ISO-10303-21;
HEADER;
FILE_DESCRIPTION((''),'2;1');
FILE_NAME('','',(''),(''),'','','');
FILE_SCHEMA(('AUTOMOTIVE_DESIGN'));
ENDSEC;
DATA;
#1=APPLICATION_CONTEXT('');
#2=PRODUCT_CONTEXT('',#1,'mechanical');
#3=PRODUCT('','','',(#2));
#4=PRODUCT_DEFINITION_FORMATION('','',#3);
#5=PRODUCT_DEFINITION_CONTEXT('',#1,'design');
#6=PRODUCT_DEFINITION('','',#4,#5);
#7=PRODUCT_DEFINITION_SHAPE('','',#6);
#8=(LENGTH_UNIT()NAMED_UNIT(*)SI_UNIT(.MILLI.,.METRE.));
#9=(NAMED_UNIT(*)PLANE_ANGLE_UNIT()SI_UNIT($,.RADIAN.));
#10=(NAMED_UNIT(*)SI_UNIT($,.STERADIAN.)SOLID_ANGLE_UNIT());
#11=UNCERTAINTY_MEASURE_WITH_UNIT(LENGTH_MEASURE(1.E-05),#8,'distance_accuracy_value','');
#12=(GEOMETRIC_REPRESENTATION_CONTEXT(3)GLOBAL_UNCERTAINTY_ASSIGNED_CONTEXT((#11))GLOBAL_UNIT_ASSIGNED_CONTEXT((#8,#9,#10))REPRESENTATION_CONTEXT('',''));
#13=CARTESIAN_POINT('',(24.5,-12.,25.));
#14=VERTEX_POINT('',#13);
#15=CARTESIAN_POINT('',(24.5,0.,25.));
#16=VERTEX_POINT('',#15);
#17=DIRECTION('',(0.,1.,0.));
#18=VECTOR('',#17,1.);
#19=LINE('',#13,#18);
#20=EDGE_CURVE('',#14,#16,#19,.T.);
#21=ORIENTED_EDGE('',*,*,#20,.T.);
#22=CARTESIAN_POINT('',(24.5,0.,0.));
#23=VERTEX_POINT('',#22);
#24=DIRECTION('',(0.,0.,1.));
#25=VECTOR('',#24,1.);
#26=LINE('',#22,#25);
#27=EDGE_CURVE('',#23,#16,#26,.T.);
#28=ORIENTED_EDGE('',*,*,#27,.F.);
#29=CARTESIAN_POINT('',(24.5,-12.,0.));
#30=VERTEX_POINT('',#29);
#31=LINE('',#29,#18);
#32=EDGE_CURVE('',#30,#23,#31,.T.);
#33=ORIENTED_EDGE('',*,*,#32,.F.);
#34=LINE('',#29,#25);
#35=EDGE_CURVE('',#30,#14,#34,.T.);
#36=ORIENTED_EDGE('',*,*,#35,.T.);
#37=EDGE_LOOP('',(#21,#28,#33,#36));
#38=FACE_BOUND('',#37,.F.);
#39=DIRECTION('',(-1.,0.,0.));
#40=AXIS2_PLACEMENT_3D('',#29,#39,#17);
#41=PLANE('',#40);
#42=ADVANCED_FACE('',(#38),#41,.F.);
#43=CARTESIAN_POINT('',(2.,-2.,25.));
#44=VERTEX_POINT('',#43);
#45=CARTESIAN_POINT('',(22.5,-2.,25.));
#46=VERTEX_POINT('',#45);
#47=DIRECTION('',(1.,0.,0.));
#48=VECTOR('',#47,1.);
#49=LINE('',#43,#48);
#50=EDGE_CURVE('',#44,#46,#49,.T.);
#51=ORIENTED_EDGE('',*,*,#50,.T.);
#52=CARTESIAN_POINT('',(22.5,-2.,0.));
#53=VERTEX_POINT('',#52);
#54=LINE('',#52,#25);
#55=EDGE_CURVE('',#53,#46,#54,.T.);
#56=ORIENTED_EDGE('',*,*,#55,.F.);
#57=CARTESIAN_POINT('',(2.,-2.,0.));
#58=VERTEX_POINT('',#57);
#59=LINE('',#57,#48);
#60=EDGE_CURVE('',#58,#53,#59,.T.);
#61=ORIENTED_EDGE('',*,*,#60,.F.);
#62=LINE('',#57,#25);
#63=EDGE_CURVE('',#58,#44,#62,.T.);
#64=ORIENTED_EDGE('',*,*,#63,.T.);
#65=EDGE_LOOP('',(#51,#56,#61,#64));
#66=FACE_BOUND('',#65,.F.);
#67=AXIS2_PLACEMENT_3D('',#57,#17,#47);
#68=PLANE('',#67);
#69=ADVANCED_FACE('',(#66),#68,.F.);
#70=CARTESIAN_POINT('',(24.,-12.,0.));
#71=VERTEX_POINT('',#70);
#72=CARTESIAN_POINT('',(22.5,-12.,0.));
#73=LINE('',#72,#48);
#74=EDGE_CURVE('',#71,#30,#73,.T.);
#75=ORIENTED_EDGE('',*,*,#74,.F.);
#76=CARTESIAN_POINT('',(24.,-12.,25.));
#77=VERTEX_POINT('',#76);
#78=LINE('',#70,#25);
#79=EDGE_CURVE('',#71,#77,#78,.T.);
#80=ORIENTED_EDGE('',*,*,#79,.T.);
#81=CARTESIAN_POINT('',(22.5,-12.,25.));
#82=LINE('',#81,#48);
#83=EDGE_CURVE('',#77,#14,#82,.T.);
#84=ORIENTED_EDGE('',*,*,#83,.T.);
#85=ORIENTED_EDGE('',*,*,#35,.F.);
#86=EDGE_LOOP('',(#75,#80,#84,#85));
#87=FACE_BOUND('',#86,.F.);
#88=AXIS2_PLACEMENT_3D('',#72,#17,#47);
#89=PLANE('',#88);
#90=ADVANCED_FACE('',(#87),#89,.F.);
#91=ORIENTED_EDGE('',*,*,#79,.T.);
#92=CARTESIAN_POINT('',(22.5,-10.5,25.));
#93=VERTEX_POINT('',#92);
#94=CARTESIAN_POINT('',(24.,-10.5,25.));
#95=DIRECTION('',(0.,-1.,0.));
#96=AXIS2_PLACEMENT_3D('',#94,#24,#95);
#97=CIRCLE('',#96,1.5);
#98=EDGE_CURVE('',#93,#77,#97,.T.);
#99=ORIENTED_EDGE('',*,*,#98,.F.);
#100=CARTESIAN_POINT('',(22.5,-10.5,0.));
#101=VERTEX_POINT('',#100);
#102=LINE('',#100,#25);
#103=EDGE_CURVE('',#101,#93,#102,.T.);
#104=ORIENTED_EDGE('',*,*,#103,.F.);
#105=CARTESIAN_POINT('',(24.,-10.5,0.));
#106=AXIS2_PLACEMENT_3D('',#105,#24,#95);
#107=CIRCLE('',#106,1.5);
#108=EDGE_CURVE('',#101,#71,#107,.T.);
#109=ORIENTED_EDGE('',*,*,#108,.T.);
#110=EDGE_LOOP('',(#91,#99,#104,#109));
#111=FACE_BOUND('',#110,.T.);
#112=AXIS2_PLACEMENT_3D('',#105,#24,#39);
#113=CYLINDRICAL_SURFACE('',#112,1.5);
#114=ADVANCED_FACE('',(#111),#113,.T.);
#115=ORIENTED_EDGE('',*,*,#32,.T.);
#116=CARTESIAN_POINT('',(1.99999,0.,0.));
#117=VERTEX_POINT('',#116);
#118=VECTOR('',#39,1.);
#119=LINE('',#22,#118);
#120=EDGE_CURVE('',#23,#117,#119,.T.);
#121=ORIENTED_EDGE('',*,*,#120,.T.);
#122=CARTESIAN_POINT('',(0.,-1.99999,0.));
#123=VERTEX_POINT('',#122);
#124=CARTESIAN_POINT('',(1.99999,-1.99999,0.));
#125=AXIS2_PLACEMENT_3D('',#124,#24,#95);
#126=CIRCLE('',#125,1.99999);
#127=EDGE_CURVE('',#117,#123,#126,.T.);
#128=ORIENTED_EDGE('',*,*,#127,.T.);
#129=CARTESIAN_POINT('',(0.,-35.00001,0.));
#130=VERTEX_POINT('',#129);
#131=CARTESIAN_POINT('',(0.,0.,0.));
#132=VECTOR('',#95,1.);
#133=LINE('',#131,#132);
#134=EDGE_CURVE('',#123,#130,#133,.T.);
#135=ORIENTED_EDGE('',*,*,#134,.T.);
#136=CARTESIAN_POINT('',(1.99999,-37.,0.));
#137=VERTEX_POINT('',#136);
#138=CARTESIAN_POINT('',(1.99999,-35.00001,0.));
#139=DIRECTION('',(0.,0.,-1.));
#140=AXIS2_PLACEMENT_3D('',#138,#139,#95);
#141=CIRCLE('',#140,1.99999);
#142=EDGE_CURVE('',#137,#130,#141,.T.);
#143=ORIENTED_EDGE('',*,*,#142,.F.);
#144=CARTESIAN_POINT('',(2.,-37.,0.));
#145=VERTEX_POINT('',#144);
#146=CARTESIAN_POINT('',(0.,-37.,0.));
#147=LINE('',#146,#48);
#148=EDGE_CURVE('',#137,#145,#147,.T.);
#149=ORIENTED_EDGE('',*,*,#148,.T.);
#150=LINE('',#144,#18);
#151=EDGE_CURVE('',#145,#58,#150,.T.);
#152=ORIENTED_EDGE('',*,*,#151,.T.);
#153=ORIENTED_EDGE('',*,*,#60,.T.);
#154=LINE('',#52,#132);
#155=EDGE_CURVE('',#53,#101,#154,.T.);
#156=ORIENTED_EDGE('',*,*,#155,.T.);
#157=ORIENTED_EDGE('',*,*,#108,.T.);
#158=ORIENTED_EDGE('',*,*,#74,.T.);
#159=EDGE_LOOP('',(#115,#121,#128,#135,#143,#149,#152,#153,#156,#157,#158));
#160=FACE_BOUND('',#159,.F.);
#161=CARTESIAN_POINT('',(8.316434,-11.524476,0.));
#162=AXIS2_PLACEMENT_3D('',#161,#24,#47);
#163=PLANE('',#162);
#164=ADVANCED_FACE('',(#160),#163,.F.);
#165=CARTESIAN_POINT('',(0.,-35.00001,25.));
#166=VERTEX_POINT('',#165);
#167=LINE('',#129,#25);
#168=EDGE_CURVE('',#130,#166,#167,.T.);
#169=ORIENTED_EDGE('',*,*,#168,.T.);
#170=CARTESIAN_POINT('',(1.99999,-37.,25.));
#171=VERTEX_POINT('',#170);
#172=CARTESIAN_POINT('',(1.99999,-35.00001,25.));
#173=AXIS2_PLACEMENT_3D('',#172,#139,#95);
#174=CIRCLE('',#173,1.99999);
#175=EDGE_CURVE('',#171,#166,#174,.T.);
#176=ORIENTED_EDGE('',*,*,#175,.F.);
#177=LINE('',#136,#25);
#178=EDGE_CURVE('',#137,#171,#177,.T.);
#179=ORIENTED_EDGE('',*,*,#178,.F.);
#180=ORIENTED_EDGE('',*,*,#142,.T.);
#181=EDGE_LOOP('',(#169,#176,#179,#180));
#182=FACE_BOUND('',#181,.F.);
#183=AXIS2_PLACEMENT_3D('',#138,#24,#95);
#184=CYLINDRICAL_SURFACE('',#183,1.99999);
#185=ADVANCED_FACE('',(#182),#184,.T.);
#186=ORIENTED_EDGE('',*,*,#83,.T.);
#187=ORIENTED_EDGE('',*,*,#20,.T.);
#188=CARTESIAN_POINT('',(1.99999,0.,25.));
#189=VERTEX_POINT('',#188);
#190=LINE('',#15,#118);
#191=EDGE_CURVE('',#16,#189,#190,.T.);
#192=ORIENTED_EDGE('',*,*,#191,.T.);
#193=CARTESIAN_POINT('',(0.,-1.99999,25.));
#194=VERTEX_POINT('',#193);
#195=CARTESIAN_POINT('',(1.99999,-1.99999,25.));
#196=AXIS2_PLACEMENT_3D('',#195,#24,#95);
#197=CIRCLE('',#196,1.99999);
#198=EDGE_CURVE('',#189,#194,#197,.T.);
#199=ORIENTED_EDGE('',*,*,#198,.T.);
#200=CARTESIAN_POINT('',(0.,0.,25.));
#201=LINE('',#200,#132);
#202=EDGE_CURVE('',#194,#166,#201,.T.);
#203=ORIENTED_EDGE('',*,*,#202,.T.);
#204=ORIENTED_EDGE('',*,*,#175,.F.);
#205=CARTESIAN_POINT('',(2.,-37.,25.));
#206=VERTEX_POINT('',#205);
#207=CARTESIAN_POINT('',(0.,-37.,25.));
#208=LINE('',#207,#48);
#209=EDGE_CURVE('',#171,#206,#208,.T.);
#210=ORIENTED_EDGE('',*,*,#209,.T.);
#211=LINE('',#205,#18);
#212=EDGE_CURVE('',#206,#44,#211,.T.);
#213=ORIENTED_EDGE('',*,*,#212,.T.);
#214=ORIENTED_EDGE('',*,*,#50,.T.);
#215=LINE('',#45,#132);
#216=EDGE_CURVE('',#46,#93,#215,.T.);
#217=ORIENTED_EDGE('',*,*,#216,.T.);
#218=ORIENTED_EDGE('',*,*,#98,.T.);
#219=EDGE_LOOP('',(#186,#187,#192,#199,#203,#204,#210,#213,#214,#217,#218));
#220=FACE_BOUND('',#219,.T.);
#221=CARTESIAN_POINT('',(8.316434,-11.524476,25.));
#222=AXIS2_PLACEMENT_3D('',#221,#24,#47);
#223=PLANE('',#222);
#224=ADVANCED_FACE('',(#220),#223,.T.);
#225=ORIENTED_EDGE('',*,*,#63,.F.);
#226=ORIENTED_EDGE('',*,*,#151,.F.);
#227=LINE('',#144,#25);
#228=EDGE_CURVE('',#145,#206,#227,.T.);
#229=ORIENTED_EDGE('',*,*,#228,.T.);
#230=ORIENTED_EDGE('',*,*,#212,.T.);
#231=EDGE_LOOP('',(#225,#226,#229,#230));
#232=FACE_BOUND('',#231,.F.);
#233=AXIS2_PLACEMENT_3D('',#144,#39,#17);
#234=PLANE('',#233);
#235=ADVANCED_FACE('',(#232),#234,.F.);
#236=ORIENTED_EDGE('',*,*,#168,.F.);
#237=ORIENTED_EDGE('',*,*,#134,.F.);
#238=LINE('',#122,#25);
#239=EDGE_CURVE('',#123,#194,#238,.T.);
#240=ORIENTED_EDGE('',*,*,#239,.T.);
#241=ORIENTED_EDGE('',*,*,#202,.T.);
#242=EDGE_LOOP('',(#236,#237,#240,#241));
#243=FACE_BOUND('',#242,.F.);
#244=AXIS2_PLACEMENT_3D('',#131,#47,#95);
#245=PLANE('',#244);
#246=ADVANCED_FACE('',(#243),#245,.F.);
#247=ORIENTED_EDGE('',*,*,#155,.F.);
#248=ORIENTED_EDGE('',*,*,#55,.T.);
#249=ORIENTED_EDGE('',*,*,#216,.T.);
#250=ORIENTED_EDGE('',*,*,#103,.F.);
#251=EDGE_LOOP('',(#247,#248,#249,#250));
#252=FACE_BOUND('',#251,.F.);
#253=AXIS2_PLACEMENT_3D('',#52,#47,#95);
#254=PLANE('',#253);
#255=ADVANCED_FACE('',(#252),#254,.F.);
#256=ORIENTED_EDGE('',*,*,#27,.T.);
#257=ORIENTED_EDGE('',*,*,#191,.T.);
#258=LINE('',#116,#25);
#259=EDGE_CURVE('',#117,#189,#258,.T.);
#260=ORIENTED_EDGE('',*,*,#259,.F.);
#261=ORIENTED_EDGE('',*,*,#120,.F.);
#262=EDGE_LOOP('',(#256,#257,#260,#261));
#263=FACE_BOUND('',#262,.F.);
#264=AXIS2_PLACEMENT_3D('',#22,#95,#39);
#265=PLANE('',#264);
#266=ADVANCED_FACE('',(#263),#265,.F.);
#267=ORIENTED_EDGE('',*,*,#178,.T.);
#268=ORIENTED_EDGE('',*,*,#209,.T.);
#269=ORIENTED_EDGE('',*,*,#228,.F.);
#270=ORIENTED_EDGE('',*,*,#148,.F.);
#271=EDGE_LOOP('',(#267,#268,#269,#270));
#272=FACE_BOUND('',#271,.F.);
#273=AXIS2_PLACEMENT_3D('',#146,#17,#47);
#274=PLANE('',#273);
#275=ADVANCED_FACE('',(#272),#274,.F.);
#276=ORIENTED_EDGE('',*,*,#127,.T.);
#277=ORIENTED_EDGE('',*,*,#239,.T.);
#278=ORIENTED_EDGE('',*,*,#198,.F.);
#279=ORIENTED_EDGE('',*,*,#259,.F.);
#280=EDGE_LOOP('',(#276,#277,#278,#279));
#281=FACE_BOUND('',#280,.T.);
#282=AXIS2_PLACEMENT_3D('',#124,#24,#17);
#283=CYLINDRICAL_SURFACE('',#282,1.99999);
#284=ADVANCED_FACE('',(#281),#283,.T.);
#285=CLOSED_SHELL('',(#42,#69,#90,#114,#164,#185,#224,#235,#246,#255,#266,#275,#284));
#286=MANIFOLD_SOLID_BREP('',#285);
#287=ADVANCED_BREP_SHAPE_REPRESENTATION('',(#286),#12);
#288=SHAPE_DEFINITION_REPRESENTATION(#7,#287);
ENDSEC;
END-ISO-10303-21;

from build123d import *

# Parameters (mm, degrees)
F1_DEPTH = 25
F2_R     = 1.5
F3_R     = 1.99999


# Not quite as in the source:
# - a fillet or chamfer is up to 0.001 mm smaller than in the source, because OpenCascade refuses the exact size


with BuildPart() as f1:
    # F0 (on Top) → F1 (new body)
    with BuildSketch(Plane.XY):
        Polygon((24.5, 0), (0, 0), (0, -37), (2, -37), (2, -2), (22.5, -2), (22.5, -12), (24.5, -12), align=None)
    extrude(amount=F1_DEPTH)

    # F2
    f2_edges = [f1.edges().sort_by_distance(p)[0] for p in [
        (22.5, -12, 12.5),
    ]]
    fillet(f2_edges, radius=F2_R)

    # F3 (radius 2 in the source; OpenCascade refuses exactly that, so slightly less here)
    f3_edges = [f1.edges().sort_by_distance(p)[0] for p in [
        (0, 0, 12.5),
        (0, -37, 12.5),
    ]]
    fillet(f3_edges, radius=F3_R)


solid = f1.part
